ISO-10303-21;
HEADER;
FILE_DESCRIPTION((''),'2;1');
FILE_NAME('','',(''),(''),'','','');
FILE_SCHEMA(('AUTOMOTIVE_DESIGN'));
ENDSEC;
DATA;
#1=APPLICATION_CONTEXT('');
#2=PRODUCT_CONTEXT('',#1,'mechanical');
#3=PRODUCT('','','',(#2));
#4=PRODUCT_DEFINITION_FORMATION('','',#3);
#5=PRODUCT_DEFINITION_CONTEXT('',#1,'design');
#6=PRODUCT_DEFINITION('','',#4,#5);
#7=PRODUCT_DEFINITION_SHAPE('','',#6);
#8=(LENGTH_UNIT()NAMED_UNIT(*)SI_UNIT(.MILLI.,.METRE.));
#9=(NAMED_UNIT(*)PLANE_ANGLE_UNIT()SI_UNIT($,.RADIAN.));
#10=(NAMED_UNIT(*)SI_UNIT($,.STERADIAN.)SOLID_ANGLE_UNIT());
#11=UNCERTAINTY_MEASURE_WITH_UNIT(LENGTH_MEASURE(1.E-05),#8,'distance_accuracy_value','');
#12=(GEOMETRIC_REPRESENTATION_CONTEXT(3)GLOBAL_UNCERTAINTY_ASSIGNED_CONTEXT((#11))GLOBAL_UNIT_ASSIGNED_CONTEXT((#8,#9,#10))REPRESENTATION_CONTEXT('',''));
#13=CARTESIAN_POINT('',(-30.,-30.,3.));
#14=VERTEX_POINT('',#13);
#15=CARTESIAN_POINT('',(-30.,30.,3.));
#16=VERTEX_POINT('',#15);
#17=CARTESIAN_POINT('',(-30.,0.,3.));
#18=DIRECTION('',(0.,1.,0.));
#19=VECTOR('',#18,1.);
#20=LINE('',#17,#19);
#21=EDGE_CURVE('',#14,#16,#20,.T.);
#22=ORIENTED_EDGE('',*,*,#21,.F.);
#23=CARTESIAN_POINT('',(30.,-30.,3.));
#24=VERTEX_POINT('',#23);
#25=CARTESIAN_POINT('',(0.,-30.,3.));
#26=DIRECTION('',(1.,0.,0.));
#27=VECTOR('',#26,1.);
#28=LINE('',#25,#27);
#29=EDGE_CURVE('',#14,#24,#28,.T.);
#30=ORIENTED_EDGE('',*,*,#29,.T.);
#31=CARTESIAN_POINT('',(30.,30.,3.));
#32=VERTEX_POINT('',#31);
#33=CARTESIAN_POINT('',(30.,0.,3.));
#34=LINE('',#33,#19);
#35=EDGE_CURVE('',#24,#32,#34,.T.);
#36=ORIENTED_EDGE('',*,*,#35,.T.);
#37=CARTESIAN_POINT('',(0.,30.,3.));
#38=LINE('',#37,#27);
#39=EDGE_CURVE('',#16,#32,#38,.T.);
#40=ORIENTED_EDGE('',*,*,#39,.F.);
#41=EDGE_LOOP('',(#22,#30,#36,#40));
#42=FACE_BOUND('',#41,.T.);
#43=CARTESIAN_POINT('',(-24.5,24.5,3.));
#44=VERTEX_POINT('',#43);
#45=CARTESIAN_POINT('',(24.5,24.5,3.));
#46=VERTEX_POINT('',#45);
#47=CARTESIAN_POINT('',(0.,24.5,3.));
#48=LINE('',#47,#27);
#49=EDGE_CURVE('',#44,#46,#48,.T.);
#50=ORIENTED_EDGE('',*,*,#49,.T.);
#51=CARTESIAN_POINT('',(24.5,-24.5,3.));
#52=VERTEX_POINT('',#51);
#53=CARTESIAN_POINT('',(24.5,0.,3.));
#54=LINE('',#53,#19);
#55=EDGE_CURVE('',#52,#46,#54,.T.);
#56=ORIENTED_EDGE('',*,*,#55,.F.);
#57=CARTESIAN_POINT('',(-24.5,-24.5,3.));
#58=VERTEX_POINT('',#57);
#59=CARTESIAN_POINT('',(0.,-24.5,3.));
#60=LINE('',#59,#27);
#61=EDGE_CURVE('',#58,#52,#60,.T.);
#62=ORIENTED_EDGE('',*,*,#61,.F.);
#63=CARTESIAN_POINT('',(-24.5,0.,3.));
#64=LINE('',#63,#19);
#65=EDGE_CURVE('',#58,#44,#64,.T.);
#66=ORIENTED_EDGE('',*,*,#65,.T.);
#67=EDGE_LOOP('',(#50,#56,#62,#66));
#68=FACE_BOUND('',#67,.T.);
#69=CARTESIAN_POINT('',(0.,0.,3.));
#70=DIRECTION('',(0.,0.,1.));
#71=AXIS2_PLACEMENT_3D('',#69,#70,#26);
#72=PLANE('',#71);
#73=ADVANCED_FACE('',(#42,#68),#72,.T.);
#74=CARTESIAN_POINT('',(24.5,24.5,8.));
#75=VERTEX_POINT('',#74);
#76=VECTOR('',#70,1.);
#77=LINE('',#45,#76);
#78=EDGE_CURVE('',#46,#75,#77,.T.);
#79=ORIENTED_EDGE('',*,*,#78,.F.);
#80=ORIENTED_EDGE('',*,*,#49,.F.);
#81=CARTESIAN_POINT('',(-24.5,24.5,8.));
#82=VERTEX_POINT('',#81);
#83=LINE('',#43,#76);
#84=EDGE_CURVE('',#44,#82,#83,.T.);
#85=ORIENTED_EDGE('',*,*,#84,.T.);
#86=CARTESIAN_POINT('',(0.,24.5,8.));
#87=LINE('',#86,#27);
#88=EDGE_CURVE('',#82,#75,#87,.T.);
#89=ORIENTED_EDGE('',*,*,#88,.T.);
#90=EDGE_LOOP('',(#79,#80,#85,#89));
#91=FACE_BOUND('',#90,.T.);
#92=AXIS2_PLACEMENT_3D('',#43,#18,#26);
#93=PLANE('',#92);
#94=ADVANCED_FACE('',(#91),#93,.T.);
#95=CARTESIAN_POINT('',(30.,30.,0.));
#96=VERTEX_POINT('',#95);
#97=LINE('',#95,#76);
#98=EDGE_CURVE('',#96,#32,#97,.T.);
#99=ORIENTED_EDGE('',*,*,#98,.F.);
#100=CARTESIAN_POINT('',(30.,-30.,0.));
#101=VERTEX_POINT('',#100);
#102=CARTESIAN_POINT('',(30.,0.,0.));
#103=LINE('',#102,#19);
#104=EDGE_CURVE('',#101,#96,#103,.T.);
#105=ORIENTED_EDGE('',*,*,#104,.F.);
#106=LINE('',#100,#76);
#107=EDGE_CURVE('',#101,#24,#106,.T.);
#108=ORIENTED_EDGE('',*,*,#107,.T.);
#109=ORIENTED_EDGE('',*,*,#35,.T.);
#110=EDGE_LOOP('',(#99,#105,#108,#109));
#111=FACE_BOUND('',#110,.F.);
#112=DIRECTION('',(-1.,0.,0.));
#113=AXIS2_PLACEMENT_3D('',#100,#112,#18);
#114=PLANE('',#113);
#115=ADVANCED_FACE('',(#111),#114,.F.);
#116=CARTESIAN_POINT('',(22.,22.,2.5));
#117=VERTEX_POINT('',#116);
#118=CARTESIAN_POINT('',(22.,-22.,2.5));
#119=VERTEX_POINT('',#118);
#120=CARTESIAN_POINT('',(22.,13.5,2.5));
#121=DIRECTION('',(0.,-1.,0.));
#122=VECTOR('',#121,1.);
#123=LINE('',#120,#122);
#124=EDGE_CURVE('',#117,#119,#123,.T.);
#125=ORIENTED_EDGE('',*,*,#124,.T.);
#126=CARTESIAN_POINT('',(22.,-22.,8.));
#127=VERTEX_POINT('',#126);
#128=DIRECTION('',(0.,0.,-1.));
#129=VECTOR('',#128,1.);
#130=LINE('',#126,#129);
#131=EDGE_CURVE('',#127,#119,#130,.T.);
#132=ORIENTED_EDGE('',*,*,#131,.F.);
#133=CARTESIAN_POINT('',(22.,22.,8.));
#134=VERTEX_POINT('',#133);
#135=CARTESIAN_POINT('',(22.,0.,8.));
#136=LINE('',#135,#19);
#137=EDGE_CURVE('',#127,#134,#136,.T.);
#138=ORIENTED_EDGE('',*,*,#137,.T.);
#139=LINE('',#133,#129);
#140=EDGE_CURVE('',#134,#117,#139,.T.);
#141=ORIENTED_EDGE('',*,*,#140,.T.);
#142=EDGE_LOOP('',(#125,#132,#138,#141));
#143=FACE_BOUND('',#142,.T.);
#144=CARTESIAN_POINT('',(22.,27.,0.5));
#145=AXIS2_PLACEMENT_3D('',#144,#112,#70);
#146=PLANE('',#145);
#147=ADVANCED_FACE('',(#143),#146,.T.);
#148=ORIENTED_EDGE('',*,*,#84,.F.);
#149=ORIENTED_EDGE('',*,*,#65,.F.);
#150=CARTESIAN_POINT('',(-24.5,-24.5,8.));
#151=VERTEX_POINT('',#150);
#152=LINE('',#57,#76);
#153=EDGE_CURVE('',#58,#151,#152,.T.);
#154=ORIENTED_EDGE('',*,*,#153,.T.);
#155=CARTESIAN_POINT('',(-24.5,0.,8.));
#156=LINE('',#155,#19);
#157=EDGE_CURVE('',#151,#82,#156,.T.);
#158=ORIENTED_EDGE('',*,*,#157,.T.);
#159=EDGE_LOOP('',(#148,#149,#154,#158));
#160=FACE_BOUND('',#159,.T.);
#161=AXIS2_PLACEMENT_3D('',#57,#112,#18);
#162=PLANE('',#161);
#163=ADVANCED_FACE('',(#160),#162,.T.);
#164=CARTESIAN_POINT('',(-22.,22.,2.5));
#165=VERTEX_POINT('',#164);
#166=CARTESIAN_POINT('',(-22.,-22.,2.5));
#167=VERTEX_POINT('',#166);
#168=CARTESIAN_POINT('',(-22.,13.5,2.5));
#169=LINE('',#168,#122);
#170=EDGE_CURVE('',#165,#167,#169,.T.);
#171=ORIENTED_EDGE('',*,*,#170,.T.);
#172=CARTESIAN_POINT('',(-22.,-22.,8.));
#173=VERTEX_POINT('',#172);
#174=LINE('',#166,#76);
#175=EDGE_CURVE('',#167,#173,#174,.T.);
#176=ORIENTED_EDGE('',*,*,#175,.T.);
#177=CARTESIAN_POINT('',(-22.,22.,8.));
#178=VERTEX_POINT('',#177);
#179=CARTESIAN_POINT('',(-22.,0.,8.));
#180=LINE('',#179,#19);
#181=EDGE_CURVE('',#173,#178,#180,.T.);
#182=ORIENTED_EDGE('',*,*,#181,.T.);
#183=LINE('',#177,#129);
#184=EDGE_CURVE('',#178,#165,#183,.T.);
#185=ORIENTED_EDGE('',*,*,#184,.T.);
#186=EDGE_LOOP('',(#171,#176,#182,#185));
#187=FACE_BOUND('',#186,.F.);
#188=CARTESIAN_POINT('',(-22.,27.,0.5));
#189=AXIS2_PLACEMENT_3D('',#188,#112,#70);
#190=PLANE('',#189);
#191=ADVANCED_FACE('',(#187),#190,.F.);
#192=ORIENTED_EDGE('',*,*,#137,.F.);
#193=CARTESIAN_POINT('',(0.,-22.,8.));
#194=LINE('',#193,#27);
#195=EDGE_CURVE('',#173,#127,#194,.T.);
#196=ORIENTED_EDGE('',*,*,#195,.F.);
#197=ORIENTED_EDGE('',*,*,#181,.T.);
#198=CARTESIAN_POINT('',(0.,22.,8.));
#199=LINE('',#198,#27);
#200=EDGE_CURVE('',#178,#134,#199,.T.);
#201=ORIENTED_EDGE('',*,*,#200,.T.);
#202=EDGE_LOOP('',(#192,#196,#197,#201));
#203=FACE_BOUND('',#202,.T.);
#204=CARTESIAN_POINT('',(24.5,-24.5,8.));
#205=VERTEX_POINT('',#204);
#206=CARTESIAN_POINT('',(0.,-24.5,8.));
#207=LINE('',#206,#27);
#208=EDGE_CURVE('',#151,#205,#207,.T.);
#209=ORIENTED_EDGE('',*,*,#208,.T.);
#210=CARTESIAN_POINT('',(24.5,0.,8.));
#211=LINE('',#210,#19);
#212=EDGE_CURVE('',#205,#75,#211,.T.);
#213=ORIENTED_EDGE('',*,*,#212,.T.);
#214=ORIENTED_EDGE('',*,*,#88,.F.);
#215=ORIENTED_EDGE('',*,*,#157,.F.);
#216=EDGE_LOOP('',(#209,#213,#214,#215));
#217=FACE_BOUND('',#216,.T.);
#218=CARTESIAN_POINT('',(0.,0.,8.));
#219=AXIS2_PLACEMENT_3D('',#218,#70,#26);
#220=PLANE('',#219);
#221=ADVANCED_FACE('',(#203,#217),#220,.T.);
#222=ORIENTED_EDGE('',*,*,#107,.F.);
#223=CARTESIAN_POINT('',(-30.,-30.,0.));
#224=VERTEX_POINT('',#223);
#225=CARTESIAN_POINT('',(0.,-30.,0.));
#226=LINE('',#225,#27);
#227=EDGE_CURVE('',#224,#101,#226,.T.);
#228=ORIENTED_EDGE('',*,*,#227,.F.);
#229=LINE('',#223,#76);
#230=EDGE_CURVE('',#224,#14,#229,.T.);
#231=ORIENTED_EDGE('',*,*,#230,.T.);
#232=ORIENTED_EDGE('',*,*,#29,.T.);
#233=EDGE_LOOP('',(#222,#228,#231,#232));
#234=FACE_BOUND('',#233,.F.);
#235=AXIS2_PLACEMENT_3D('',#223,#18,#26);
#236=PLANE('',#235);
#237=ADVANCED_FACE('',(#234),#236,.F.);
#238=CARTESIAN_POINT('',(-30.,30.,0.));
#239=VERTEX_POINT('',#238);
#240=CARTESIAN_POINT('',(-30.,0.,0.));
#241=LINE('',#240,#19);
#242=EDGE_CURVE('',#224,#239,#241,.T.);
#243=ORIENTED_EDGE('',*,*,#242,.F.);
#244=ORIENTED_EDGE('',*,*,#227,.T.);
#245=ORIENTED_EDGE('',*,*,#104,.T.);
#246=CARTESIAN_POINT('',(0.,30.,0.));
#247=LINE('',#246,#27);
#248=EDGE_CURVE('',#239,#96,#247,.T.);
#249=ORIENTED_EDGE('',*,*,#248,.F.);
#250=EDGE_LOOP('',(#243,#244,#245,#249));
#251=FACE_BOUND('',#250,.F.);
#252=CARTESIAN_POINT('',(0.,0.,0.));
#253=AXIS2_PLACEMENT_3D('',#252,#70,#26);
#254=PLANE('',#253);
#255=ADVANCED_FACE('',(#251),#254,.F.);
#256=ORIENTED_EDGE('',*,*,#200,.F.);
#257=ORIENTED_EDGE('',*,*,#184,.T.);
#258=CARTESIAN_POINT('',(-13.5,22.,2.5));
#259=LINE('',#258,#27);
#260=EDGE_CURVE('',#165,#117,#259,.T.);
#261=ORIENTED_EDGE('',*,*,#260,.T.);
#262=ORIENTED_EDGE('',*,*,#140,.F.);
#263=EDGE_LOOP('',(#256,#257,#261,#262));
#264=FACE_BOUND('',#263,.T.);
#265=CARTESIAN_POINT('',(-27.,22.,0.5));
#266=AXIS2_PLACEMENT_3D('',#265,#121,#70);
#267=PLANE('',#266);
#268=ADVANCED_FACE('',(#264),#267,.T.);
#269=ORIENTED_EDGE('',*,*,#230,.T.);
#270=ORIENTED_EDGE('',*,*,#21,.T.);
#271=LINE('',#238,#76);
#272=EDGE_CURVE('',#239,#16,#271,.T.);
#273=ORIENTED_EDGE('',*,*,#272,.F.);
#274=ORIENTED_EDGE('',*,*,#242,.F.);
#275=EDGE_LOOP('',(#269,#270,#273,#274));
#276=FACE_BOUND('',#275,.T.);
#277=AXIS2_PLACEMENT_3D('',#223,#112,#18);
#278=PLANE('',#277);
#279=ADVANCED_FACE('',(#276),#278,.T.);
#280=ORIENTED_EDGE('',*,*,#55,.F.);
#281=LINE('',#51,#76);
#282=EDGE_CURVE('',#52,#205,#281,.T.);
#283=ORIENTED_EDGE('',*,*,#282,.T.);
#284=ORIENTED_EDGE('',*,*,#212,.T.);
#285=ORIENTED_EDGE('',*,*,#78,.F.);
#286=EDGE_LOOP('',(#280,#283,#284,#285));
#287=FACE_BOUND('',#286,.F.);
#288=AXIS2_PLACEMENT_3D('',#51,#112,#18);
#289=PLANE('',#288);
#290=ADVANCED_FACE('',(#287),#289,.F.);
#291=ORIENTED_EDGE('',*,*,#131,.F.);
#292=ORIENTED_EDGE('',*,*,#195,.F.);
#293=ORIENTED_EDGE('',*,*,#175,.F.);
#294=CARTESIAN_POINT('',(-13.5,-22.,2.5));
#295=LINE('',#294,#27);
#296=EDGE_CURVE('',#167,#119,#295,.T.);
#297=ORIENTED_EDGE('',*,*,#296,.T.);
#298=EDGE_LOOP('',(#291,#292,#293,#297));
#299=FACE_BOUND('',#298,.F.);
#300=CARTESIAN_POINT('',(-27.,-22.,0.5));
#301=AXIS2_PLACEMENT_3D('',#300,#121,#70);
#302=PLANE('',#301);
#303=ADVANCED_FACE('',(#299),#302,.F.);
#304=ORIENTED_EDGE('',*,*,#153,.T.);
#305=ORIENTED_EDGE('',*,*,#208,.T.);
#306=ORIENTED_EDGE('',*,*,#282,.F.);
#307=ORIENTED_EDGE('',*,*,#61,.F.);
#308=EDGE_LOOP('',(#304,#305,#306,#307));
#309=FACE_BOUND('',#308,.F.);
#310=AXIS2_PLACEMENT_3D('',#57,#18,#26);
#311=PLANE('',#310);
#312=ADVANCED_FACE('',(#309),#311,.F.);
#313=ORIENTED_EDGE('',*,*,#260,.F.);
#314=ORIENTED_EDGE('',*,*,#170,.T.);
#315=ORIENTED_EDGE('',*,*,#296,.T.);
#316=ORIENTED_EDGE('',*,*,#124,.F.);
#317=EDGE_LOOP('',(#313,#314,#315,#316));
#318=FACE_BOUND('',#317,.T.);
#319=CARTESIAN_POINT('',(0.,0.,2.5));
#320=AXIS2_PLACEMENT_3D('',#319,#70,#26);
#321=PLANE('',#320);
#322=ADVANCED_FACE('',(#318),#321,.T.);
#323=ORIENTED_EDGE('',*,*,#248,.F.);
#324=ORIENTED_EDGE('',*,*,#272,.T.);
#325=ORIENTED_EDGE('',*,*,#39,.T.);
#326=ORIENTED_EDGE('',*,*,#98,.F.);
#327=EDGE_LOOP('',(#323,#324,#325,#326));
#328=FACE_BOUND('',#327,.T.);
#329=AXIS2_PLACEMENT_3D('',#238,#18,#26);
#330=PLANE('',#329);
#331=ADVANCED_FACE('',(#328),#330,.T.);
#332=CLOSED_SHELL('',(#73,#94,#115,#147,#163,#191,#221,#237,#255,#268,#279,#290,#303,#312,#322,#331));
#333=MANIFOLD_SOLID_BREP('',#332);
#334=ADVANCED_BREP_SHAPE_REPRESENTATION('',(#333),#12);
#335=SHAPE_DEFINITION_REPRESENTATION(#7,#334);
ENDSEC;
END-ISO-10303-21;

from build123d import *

# Parameters (mm, degrees)
F0_W        = 60
F0_H        = 60
F1_DEPTH    = 3
F2_W        = 49
F2_H        = 49
F3_DEPTH    = 5
F4_T        = 2.5
F4_T3_DEPTH = 54
F4_T5_DEPTH = 54


# Not quite as in the source:
# - a shell that OpenCascade refuses in one call is made with other operations: the cavity is built on its own and cut out


with BuildPart() as f1:
    # F0 (on Top) → F1 (new body)
    with BuildSketch(Plane.XY):
        Rectangle(F0_W, F0_H)
    extrude(amount=F1_DEPTH)

    # F2 (on face) → F3 (join)
    with BuildSketch(Plane.XY.offset(3)):
        Rectangle(F2_W, F2_H)
    extrude(amount=F3_DEPTH)

    # F4: shell of thickness 2.5, made by hand


with BuildPart() as f4_core1:
    # F4_t2: copy of F1
    add(f1.part)

    # the walls: a layer under each face that stays
    f4_faces = [f4_core1.faces().sort_by_distance(p)[0] for p in [
        (0, -30, 1.5),
        (-30, 0, 1.5),
        (30, 0, 1.5),
        (0, 0, 0),
        (-25.7142857143, -25.7142857143, 3),
        (0, 30, 1.5),
        (0, -24.5, 5.5),
        (24.5, 0, 5.5),
        (0, 24.5, 5.5),
        (-24.5, 0, 5.5),
    ]]
    thicken(f4_faces, amount=-F4_T, mode=Mode.SUBTRACT)

    # F4_s4 → F4_t3 (cut)
    with BuildSketch(Plane.YZ.offset(-27)):
        Polygon((-24.525, 3.025), (-24.5, 0.5), (-22, 0.5), (-22, 3), align=None)
        Polygon((24.525, 3.025), (24.5, 0.5), (22, 0.5), (22, 3), align=None)
    extrude(amount=F4_T3_DEPTH, mode=Mode.SUBTRACT)

    # F4_s6 → F4_t5 (cut)
    with BuildSketch(Plane.XZ.offset(-27)):
        Polygon((24.525, 3.025), (24.5, 0.5), (22, 0.5), (22, 3), align=None)
        Polygon((-24.525, 3.025), (-24.5, 0.5), (-22, 0.5), (-22, 3), align=None)
    extrude(amount=F4_T5_DEPTH, mode=Mode.SUBTRACT)


with BuildPart() as f1_1:
    add(f1.part)

    # what is left inside the walls is the cavity
    f4_cavity = [f4_core1.part.solids().sort_by_distance(p)[0] for p in [
        (0, -7.333333, 2.525),
    ]]
    add(f4_cavity, mode=Mode.SUBTRACT)


solid = f1_1.part
